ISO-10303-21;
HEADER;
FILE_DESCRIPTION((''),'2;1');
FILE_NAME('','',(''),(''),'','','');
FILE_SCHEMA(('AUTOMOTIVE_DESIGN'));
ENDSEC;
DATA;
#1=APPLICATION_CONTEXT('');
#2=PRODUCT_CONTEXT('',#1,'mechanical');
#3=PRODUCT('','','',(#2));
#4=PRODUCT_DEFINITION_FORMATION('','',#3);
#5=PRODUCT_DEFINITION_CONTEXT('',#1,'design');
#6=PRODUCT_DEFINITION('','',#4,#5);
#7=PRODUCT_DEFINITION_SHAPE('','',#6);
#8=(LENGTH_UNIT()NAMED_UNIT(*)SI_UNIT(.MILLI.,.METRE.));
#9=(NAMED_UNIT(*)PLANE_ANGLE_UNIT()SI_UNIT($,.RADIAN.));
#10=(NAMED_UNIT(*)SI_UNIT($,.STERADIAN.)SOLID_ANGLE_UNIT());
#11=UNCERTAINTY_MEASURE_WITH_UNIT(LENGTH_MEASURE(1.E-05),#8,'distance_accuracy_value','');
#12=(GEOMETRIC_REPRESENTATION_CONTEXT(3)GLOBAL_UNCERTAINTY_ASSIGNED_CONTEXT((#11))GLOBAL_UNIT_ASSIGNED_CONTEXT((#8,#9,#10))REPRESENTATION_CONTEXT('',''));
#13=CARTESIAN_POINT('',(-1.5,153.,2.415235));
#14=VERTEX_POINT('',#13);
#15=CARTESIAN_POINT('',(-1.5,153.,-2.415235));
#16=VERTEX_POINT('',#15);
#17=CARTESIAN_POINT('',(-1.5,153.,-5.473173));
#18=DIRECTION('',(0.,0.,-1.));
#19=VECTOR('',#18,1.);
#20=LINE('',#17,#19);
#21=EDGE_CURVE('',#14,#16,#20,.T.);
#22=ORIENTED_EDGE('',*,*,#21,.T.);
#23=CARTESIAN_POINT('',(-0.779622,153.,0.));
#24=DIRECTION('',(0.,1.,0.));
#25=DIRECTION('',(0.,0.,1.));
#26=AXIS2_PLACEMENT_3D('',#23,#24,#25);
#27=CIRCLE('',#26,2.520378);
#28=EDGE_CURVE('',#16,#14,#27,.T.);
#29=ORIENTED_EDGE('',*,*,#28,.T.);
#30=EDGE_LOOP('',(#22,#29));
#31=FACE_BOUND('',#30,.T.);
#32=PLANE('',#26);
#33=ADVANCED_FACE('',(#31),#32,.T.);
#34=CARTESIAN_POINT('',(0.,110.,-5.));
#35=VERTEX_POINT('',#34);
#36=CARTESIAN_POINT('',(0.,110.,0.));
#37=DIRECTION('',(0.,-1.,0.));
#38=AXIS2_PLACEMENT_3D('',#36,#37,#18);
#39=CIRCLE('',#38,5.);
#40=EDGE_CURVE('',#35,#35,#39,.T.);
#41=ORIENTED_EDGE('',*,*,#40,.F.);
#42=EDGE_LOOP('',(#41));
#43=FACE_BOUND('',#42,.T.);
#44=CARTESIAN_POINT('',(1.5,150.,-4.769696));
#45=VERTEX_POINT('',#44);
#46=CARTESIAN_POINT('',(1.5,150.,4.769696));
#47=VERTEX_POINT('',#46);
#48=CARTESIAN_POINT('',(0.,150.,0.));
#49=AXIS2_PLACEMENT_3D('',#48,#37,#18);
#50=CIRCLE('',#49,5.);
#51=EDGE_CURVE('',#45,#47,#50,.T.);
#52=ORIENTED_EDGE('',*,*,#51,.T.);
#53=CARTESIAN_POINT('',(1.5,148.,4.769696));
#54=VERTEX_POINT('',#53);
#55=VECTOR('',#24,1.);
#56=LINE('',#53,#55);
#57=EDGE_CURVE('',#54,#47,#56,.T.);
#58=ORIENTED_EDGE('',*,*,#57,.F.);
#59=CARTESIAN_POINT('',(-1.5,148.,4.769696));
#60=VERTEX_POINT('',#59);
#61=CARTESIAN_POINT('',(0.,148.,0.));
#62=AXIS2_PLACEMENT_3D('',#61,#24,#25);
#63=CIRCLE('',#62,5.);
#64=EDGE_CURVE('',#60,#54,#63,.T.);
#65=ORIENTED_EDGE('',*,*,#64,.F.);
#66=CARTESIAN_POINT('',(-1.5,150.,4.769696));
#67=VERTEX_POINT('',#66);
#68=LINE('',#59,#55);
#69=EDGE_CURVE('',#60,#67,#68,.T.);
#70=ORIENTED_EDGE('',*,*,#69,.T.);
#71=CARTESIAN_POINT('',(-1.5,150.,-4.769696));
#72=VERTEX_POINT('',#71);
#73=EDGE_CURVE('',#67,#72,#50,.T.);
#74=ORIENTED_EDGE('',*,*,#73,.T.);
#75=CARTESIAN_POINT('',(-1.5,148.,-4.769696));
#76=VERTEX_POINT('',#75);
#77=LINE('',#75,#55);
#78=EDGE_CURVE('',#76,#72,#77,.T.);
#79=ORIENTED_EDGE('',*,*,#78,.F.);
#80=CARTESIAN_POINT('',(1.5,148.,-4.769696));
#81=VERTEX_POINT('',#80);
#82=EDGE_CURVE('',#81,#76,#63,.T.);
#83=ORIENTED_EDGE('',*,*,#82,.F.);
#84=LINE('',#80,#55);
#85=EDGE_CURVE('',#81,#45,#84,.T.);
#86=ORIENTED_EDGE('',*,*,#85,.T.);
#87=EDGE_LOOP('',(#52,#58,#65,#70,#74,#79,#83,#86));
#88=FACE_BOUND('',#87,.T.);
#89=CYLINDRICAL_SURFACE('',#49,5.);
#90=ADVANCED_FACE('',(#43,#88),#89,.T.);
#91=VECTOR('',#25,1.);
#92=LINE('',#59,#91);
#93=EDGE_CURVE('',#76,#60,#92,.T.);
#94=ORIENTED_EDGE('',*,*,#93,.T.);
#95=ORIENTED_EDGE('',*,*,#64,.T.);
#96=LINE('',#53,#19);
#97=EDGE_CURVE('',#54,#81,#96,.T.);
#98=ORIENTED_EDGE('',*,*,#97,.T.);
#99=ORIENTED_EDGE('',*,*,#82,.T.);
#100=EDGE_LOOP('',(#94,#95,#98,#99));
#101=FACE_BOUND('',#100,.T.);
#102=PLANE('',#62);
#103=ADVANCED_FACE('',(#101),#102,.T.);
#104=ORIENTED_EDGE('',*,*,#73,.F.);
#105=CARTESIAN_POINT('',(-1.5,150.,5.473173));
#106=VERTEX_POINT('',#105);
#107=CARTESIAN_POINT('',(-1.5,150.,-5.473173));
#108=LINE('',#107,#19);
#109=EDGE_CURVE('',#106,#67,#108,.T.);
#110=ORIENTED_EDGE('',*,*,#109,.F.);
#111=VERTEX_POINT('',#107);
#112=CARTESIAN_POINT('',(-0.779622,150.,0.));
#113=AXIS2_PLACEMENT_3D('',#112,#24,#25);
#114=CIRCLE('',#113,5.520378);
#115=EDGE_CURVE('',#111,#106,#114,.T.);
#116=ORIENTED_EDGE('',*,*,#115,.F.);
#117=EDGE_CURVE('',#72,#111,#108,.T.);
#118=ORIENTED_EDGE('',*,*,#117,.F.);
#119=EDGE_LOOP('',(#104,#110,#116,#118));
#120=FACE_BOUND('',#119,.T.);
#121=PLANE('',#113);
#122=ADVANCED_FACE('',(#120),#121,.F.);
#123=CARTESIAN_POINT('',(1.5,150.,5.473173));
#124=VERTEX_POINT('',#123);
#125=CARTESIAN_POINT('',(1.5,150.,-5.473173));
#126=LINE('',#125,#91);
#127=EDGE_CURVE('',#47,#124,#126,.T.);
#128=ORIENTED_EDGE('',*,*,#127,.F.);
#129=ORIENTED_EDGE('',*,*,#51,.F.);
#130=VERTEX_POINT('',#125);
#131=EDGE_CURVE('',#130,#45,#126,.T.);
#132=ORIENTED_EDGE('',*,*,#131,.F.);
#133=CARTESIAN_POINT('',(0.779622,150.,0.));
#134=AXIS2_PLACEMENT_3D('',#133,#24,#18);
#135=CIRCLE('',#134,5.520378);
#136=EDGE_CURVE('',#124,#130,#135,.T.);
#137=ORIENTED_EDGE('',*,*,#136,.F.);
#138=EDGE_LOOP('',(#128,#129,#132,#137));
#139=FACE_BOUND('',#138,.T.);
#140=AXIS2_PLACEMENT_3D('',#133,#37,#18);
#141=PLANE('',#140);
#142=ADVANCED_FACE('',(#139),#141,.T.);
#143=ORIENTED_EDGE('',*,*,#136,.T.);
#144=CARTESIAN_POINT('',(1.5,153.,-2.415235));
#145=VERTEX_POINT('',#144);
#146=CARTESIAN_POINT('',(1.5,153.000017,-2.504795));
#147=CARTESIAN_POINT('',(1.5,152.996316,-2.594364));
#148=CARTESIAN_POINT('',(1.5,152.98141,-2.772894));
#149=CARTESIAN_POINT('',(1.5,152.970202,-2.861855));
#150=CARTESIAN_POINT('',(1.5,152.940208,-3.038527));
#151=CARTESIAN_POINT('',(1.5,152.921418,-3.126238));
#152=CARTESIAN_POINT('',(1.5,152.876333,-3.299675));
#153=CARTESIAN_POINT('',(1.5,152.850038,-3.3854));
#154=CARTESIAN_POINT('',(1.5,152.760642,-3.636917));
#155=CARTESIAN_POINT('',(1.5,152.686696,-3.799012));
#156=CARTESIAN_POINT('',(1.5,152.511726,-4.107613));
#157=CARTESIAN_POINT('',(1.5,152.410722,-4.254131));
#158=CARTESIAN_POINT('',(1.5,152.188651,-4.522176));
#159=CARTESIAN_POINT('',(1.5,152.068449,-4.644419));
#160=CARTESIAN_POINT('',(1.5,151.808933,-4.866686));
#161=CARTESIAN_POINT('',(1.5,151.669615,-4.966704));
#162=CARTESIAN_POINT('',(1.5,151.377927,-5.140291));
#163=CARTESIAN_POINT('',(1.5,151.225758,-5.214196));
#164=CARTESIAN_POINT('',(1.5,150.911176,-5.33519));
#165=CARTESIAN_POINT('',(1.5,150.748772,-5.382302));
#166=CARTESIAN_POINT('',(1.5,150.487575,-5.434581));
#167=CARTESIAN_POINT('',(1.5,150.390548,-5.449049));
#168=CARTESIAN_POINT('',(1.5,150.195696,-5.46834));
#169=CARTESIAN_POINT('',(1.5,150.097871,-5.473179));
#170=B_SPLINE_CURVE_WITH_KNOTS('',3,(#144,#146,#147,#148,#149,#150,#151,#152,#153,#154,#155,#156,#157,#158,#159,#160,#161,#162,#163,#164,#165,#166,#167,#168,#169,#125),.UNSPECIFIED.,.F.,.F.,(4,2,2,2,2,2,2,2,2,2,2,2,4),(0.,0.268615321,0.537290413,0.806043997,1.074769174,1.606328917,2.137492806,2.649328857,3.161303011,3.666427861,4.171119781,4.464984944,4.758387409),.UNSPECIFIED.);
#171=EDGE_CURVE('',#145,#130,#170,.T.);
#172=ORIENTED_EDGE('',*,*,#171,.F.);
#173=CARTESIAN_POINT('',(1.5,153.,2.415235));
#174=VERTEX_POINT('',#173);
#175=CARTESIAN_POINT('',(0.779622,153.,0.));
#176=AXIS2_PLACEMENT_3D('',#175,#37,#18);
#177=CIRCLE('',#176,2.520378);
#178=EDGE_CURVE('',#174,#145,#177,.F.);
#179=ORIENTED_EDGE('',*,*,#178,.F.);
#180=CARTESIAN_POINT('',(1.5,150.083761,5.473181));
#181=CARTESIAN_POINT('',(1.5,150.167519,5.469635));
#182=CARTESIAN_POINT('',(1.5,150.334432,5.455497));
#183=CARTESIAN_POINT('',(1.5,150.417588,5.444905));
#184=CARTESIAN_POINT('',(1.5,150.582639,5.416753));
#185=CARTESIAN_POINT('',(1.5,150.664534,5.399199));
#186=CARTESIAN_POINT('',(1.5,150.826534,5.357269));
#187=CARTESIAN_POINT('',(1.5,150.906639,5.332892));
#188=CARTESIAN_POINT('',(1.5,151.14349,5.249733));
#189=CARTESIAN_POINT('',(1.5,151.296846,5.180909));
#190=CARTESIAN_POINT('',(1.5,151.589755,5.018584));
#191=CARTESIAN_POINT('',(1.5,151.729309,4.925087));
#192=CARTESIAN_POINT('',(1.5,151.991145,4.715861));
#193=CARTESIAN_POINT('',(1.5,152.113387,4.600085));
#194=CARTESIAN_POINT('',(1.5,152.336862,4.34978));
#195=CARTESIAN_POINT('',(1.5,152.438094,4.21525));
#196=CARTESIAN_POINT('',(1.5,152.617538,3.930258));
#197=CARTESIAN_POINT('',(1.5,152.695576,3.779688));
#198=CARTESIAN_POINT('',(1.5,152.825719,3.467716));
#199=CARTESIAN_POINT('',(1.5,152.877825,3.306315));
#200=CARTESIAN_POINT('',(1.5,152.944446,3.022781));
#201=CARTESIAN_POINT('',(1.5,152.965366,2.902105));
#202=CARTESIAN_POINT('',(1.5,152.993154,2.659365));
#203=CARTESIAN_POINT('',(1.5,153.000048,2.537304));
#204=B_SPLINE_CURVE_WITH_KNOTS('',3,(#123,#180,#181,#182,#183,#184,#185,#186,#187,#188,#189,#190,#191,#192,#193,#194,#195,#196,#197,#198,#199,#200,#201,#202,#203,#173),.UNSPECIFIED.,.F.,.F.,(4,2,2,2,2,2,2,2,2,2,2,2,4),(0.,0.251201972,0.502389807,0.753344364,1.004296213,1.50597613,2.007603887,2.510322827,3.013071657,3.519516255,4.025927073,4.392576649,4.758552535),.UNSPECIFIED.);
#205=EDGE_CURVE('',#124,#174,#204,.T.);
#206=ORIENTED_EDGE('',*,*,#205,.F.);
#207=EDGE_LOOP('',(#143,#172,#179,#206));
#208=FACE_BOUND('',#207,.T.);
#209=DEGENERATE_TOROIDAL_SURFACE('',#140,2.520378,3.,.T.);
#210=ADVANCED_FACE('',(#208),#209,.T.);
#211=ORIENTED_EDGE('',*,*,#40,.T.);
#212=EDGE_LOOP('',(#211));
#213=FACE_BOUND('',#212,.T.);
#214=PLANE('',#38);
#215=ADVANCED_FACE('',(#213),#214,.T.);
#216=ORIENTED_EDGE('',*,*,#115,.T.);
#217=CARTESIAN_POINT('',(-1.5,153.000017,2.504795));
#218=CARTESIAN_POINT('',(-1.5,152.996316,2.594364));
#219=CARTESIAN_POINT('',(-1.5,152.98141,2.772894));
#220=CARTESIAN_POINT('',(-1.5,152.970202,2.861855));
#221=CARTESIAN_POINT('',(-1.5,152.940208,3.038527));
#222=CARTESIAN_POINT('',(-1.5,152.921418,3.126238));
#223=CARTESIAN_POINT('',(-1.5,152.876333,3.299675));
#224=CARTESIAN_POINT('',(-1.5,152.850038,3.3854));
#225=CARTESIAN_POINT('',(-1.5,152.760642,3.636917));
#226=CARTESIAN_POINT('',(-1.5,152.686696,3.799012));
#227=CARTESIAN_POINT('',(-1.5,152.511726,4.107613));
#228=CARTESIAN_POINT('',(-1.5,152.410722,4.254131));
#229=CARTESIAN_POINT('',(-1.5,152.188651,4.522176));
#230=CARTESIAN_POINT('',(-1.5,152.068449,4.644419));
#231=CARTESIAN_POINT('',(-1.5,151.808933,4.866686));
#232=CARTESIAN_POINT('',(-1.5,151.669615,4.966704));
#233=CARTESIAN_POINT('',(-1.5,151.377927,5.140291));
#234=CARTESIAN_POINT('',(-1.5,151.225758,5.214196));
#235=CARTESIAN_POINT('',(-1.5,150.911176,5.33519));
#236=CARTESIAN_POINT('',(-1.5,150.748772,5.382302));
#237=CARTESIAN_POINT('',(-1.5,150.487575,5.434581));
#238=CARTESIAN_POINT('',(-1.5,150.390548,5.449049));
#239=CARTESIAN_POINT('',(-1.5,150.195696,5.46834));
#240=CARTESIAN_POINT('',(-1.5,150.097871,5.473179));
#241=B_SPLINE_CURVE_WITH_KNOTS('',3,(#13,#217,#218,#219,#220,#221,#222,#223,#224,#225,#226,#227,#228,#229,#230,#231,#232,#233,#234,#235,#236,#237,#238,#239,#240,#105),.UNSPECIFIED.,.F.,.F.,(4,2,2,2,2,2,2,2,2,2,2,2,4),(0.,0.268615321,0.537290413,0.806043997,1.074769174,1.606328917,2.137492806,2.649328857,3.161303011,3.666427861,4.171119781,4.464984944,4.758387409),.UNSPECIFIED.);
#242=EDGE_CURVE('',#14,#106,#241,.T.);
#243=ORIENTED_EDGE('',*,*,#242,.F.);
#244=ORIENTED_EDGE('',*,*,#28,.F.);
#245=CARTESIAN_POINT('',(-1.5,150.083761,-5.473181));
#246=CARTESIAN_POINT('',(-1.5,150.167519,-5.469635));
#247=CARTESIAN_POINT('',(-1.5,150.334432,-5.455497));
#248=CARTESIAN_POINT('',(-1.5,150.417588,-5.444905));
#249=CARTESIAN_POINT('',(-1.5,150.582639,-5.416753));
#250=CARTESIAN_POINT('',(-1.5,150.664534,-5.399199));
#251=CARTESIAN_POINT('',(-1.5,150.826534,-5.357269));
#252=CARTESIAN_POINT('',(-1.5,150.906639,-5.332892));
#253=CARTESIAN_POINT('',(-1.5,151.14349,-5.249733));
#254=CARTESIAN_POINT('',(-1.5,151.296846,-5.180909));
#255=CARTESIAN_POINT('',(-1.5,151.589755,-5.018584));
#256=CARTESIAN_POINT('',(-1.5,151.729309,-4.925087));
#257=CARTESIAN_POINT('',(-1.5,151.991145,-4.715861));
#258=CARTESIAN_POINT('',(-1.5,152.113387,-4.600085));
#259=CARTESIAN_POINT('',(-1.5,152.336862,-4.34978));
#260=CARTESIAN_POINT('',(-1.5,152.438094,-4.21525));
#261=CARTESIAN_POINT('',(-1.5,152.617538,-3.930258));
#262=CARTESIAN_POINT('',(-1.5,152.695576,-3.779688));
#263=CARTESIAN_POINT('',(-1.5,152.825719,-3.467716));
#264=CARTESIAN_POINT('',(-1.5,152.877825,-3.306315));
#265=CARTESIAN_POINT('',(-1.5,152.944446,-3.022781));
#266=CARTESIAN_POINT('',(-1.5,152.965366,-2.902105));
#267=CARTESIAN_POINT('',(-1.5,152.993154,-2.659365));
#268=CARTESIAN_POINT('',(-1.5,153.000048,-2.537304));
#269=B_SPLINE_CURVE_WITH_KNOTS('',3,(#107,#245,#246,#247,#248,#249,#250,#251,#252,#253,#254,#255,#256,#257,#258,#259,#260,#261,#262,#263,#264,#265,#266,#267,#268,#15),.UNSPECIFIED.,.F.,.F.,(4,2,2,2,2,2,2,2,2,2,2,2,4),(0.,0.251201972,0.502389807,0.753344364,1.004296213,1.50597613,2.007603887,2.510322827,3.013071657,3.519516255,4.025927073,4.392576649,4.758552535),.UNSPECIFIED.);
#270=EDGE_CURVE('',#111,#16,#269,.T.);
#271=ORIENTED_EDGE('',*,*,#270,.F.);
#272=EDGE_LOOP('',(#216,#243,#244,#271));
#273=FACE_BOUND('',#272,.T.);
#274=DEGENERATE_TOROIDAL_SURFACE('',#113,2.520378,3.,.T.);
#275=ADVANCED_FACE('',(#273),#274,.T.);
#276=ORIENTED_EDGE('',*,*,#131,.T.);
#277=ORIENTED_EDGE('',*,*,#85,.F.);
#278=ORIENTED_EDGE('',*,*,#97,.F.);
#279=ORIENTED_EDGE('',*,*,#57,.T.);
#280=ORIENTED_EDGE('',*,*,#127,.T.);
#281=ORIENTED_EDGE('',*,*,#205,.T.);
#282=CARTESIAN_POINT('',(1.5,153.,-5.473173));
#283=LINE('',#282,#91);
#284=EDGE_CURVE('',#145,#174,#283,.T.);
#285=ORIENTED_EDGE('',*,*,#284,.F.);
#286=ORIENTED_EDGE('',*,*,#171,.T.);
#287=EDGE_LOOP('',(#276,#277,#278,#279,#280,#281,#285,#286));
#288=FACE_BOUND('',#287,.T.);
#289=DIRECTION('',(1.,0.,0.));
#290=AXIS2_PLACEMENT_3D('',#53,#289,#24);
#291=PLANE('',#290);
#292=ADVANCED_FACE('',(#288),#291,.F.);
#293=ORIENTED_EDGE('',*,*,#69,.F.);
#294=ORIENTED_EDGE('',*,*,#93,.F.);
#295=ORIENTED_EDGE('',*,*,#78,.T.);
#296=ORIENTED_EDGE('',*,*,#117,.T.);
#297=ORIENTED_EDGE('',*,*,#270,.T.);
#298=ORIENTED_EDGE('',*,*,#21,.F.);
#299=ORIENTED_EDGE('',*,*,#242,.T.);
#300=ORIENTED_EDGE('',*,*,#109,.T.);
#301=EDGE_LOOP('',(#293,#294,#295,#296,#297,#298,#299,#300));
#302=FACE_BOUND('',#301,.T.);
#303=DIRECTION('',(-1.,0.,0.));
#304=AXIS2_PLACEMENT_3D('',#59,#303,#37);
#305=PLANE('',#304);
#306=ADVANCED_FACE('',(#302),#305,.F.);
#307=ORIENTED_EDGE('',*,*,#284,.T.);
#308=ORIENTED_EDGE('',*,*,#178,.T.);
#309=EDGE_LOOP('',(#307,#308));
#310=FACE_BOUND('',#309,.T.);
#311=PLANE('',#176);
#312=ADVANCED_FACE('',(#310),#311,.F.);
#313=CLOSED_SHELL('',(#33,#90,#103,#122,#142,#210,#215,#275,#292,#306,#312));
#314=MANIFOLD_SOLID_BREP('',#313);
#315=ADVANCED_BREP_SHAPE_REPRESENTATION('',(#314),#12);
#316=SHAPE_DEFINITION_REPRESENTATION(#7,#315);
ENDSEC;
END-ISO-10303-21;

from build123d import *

# Parameters (mm, degrees)
BOSS_EXTRUDE1_START     = -40
BOSS_EXTRUDE1_OUTLINE_R = 5
BOSS_EXTRUDE1_DEPTH     = 40
CUT_EXTRUDE1_DEPTH      = 2
BOSS_EXTRUDE2_DEPTH     = 3
FILLET1_R               = 3


# Read off the part's stored shape, not the designer's step: Boss-Extrude1
with BuildPart() as part:
    # Boss-Extrude1 outline → Boss-Extrude1 (new body)
    with BuildSketch(Plane.XZ.offset(-110).offset(BOSS_EXTRUDE1_START)):
        Circle(BOSS_EXTRUDE1_OUTLINE_R)
    extrude(amount=BOSS_EXTRUDE1_DEPTH)

    # Sketch12 → Cut-Extrude1 (cut)
    with BuildSketch(Plane(origin=(0, 150, 0), x_dir=(1, 0, 0), z_dir=(0, 1, 0))):
        with BuildLine():
            Line((1.5, -4.769696007), (1.5, 4.769696007))
            ThreePointArc((1.5, 4.769696007), (0, 5), (-1.5, 4.769696007))
            Line((-1.5, 4.769696007), (-1.5, -4.769696007))
            ThreePointArc((-1.5, -4.769696007), (0, -5), (1.5, -4.769696007))
        make_face()
    extrude(amount=-CUT_EXTRUDE1_DEPTH, mode=Mode.SUBTRACT)

    # Sketch13 → Boss-Extrude2 (add)
    with BuildSketch(Plane(origin=(0, 150, 0), x_dir=(1, 0, 0), z_dir=(0, 1, 0))):
        with BuildLine():
            Line((1.5, 5.473173211), (1.5, -5.473173211))
            ThreePointArc((1.5, -5.473173211), (6.3, 0), (1.5, 5.473173211))
        make_face()
        with BuildLine():
            Line((-1.5, 5.473173211), (-1.5, -5.473173211))
            ThreePointArc((-1.5, -5.473173211), (-6.3, 0), (-1.5, 5.473173211))
        make_face()
    extrude(amount=BOSS_EXTRUDE2_DEPTH)

    # Fillet1
    fillet1_edges = [part.edges().sort_by_distance(p)[0] for p in [
        (-6.3, 153, 0),
        (6.3, 153, 0),
    ]]
    fillet(fillet1_edges, radius=FILLET1_R - 0.0001)  # a hair under: the kernel refuses the full size


solid = part.part
